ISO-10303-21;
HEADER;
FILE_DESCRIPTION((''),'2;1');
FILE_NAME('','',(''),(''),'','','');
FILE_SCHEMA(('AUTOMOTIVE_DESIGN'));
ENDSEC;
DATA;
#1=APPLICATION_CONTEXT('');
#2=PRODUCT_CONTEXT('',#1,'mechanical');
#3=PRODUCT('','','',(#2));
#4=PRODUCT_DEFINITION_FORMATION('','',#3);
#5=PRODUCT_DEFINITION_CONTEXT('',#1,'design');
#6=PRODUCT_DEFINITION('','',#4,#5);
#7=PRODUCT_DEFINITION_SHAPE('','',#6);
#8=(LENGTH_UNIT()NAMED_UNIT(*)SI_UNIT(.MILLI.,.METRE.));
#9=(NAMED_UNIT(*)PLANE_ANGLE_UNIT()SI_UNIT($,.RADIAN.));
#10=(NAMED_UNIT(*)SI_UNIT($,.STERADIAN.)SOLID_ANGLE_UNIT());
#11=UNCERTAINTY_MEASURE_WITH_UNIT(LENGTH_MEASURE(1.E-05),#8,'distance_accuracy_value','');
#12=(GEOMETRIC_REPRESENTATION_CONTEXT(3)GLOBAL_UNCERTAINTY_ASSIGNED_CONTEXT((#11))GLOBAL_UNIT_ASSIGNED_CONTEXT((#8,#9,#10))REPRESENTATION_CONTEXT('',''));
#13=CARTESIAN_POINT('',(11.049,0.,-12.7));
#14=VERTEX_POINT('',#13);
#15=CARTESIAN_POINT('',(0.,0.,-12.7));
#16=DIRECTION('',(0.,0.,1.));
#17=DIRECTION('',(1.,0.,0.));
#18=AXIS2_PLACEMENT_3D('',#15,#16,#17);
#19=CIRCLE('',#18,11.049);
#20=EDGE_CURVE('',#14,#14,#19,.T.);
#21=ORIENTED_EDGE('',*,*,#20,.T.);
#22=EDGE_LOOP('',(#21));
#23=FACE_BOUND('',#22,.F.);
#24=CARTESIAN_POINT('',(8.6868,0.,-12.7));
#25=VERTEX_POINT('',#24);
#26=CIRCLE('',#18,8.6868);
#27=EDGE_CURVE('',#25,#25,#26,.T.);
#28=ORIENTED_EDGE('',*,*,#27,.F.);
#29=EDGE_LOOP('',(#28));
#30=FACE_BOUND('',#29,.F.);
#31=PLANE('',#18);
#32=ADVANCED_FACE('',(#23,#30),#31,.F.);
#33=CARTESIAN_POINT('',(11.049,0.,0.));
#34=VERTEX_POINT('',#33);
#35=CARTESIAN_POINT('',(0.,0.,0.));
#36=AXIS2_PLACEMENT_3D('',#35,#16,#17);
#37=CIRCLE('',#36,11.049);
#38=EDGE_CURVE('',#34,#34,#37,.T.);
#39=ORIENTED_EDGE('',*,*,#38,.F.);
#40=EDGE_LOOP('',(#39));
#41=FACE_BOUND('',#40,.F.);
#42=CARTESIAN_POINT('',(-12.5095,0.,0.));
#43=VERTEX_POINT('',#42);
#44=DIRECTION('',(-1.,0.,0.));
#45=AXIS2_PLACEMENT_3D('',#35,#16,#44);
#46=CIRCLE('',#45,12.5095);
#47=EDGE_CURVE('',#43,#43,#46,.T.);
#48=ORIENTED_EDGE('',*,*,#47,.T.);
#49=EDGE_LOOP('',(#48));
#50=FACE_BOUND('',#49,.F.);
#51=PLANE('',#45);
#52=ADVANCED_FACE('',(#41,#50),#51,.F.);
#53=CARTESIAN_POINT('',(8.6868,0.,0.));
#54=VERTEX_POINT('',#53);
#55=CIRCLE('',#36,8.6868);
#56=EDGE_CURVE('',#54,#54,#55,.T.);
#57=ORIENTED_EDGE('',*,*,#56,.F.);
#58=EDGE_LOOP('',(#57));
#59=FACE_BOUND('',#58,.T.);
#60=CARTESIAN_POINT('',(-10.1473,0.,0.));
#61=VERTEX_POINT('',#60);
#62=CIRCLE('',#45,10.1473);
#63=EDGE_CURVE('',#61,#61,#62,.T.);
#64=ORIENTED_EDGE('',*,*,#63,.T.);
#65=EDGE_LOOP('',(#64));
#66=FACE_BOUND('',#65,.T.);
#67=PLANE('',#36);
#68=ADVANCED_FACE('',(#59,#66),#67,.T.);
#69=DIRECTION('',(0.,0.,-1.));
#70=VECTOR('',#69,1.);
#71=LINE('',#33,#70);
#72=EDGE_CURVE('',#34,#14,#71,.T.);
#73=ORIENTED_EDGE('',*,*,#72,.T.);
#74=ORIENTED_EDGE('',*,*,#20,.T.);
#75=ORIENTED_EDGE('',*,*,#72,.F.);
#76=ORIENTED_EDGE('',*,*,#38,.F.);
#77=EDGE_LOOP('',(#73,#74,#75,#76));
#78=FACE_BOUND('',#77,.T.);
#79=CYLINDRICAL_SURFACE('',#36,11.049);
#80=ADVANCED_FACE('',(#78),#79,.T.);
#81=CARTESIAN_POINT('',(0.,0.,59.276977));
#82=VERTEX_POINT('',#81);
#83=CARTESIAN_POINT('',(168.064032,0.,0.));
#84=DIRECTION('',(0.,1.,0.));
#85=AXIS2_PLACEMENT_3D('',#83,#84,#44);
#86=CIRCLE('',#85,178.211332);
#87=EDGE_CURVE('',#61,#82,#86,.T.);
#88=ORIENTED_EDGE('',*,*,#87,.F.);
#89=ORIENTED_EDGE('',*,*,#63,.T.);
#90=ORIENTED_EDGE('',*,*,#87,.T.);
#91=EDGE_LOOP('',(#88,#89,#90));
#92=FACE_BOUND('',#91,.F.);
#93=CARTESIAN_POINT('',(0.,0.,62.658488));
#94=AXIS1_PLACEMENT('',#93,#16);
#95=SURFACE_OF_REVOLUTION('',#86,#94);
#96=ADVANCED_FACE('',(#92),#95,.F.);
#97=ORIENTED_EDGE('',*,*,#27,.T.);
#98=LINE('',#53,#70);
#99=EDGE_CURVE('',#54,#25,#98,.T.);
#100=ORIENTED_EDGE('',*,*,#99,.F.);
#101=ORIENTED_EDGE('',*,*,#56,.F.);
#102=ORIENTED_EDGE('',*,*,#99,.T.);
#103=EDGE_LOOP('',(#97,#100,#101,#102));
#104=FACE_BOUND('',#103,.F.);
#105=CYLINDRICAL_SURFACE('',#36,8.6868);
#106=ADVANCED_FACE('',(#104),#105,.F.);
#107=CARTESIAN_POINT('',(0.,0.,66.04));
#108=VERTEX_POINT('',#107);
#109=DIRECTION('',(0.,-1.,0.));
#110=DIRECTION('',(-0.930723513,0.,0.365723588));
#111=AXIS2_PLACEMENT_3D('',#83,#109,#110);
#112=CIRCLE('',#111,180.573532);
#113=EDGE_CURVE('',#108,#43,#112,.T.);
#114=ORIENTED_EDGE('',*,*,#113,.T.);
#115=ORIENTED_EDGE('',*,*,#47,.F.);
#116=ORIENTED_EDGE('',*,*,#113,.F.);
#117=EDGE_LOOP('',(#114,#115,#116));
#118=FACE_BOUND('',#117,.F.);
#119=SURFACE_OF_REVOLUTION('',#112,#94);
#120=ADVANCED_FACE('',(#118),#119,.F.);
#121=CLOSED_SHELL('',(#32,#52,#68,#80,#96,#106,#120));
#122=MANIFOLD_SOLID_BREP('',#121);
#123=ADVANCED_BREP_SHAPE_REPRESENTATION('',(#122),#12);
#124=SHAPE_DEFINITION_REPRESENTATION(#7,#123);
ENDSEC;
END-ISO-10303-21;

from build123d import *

# Parameters (mm, degrees)
F2_R     = 11.049
F2_R_2   = 8.6868
F3_DEPTH = 12.7
F7_DEPTH = 3.302


# Not quite as in the source:
# - the program builds the solid bodies; features that only make, move or delete a surface that nothing else refers to are left out


with BuildPart() as f1:
    # F0 (on Front) → F1 (revolve)
    with BuildSketch(Plane.XZ):
        with BuildLine():
            Line((0, 59.2769769434), (0, 66.04))
            ThreePointArc((0, 66.04), (-9.3545638677, 33.6071762807), (-12.5095, 0))
            Line((-12.5095, 0), (-10.1473, 0))
            ThreePointArc((-10.1473, 0), (-7.5921575539, 30.0696179426), (0, 59.2769769434))
        make_face()
    revolve(axis=Axis((0, 0, 62.6584884717), (0, 0, 1)))

    # F2 (on Top) → F3 (join)
    with BuildSketch(Plane.XY):
        Circle(F2_R)
        Circle(F2_R_2, mode=Mode.SUBTRACT)
    extrude(amount=-F3_DEPTH)

    # F6 (on Front) → F7 (cut, symmetric)
    with BuildSketch(Plane.XZ):
        with BuildLine():
            ThreePointArc((6.9723, 0), (5.2204583943, 24.7022854782), (0, 48.9101079951))
            ThreePointArc((0, 48.9101079951), (-5.2204583943, 24.7022854782), (-6.9723, 0))
            Line((-6.9723, 0), (0, 0))
            Line((0, 0), (6.9723, 0))
        make_face()
    extrude(amount=F7_DEPTH, both=True, mode=Mode.SUBTRACT)


solid = f1.part
